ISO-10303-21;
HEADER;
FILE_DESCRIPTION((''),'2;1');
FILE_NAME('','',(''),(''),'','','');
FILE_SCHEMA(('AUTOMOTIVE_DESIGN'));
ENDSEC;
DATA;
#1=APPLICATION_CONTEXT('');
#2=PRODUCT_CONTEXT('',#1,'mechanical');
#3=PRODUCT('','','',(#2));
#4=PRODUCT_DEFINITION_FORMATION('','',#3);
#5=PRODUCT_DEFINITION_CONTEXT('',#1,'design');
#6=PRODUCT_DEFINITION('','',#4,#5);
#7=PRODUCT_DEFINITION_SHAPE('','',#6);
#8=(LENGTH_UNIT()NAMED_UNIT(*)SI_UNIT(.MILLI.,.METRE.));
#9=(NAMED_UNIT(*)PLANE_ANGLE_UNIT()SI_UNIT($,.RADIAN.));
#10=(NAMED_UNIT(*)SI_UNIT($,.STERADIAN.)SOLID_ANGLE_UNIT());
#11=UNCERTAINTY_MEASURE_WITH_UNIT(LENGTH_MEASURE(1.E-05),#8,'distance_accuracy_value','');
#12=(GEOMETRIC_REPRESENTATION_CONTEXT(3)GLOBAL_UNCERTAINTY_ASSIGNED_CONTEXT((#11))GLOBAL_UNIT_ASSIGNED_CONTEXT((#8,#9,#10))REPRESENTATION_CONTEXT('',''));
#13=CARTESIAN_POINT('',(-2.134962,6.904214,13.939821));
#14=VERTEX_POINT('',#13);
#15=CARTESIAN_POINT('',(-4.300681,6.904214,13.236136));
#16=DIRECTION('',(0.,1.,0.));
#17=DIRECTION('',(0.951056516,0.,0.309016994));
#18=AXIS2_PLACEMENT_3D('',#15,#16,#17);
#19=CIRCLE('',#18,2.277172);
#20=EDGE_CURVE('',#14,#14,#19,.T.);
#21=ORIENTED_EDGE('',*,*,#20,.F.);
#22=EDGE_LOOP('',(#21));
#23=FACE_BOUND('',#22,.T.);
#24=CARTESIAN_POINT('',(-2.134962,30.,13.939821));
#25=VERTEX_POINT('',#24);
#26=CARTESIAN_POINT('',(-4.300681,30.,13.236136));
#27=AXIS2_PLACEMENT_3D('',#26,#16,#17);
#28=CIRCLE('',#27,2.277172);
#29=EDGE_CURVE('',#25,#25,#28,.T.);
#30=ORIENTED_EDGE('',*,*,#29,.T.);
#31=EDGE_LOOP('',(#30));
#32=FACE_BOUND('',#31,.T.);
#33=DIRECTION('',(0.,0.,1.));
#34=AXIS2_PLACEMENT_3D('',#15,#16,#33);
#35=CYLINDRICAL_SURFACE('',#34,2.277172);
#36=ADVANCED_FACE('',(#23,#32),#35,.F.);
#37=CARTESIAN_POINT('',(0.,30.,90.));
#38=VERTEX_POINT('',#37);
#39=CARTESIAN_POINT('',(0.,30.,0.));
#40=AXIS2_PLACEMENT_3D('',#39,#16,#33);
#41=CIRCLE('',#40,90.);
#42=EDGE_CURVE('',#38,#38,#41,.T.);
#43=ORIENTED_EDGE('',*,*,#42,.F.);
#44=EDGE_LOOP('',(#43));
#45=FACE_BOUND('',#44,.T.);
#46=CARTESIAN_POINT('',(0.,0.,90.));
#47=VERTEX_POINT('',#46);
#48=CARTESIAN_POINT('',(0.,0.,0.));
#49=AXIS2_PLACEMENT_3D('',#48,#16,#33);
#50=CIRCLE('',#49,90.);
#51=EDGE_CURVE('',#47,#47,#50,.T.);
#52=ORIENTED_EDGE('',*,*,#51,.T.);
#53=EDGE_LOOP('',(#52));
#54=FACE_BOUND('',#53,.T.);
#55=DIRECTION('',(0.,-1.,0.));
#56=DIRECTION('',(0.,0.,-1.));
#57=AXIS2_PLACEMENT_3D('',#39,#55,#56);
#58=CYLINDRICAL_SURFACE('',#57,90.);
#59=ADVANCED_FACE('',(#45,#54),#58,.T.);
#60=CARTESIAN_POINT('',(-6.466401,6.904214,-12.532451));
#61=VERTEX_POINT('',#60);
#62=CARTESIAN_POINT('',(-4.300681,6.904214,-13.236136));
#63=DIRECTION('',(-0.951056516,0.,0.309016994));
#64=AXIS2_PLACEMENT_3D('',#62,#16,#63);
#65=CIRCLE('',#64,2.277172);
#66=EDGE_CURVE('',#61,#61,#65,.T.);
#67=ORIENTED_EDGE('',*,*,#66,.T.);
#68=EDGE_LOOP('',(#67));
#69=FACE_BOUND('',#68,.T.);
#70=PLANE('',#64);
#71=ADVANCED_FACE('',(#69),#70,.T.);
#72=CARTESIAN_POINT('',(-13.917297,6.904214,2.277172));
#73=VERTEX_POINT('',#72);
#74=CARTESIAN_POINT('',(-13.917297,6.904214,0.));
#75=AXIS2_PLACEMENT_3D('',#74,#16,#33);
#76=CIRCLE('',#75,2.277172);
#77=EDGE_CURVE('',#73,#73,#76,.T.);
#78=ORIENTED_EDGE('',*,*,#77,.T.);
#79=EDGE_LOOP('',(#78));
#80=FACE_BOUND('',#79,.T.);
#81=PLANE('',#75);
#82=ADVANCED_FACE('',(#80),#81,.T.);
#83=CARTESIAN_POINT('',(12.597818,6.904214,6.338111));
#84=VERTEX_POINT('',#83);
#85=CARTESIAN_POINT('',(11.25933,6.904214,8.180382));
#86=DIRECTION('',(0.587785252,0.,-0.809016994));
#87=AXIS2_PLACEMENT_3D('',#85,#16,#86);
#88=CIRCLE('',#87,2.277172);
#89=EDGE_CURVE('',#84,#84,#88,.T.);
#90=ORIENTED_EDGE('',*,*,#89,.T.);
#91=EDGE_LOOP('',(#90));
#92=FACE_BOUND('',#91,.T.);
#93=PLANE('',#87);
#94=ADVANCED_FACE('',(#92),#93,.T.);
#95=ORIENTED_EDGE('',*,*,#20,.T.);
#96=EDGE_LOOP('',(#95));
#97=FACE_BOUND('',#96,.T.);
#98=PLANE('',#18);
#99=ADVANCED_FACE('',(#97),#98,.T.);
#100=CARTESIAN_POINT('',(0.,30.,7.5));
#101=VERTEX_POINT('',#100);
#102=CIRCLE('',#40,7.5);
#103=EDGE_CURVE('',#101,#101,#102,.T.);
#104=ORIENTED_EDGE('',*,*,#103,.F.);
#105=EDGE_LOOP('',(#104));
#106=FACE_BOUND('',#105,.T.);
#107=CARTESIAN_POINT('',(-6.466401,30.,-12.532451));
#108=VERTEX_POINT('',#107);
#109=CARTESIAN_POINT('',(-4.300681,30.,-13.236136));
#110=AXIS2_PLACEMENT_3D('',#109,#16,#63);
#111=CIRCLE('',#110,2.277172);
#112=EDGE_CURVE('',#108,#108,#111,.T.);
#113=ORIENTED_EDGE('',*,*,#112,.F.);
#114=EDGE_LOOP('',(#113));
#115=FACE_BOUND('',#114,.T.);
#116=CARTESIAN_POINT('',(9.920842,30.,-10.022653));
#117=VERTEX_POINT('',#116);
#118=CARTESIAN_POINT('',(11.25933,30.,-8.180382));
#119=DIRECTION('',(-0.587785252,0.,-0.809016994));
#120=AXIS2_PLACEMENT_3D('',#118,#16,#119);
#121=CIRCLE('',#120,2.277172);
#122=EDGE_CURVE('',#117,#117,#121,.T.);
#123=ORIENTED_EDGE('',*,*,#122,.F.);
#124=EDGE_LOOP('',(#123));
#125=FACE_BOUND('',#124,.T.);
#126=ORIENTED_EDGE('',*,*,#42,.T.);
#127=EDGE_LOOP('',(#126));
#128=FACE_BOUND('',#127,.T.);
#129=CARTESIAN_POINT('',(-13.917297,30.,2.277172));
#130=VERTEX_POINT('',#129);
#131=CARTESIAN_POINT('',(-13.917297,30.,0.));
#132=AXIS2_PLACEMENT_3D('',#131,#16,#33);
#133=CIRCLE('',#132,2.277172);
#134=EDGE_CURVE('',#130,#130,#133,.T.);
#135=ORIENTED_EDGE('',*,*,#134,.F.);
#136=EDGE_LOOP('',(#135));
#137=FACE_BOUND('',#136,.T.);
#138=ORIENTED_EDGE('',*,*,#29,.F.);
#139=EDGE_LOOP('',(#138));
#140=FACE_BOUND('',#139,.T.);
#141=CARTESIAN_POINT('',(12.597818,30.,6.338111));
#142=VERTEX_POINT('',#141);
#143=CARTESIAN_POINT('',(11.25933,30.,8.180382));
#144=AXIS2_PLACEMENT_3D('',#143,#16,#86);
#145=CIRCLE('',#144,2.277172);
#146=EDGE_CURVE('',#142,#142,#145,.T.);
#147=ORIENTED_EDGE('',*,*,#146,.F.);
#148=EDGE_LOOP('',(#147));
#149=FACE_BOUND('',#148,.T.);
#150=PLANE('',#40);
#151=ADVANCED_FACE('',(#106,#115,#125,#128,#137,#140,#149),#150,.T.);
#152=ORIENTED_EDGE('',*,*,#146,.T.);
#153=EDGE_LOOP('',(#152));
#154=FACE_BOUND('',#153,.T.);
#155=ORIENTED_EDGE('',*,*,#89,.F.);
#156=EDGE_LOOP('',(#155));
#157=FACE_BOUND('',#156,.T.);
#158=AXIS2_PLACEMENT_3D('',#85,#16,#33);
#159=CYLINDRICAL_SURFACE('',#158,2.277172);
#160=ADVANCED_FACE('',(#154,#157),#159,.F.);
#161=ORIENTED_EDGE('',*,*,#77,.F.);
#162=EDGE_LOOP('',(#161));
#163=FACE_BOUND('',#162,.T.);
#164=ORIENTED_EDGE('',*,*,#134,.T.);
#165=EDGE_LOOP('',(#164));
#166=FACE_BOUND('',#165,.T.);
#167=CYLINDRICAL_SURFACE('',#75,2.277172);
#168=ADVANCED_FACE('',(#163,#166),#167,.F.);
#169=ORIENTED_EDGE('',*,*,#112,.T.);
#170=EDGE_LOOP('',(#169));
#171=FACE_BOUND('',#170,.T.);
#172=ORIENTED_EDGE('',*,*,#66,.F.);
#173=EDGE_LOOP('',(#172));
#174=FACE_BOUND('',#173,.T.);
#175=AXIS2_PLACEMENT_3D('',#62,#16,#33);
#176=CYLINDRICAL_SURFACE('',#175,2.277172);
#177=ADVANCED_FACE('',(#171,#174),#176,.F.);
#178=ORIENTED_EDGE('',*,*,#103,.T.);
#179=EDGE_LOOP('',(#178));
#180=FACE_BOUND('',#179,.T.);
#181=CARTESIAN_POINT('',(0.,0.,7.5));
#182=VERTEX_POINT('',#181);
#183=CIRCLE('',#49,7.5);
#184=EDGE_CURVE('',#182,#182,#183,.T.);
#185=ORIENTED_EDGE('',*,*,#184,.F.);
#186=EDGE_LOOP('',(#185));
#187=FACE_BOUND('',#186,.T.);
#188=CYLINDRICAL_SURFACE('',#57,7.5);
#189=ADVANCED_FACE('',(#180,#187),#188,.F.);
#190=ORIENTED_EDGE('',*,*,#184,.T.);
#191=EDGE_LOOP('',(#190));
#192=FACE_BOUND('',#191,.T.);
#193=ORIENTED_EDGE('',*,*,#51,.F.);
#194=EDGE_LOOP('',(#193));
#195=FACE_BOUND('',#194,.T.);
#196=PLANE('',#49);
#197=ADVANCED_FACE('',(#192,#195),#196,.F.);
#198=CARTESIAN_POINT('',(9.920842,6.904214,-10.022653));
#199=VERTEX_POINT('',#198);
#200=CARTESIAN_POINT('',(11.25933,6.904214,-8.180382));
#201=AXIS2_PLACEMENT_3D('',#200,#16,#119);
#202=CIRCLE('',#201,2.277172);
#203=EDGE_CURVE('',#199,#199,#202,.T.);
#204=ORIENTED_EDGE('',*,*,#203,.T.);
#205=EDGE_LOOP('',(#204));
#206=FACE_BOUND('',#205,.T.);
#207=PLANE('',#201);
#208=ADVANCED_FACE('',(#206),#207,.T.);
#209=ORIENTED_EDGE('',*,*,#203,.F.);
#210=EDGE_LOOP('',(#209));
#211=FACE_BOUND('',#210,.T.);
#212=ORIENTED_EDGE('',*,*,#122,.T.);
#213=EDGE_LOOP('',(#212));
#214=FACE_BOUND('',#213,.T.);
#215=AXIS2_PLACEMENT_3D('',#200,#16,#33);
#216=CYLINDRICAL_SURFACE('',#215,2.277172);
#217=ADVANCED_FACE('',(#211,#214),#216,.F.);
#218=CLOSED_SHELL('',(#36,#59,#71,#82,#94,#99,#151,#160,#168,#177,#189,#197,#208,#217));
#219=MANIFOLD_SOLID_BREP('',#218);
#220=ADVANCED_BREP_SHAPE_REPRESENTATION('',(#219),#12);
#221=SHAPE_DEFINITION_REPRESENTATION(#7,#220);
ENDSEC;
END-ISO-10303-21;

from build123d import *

# Parameters (mm, degrees)
SKETCH1_R           = 90
BOSS_EXTRUDE1_DEPTH = 30
SKETCH2_R           = 7.5
CUT_EXTRUDE1_DEPTH  = 131.766968306
SKETCH3_R           = 2.277172364
CUT_EXTRUDE2_DEPTH  = 23.095785854
CIRPATTERN1_COUNT   = 5


with BuildPart() as part:
    # Sketch1 → Boss-Extrude1 (new body)
    with BuildSketch(Plane(origin=(0, 0, 0), x_dir=(1, 0, 0), z_dir=(0, 1, 0))):
        Circle(SKETCH1_R)
    extrude(amount=BOSS_EXTRUDE1_DEPTH)

    # Sketch2 → Cut-Extrude1 (cut, through all)
    with BuildSketch(Plane(origin=(0, 0, 0), x_dir=(1, 0, 0), z_dir=(0, 1, 0))):
        Circle(SKETCH2_R)
    extrude(amount=CUT_EXTRUDE1_DEPTH, mode=Mode.SUBTRACT)

    # Sketch3 → Cut-Extrude2 (cut)
    with BuildSketch(Plane(origin=(0, 30, 0), x_dir=(1, 0, 0), z_dir=(0, 1, 0))):
        with Locations((-13.917297309, 0)):
            Circle(SKETCH3_R)
    cut_extrude2 = extrude(amount=-CUT_EXTRUDE2_DEPTH, mode=Mode.SUBTRACT)

    # CirPattern1: Cut-Extrude2 ×5 about axis
    cirpattern1_axis = Axis((0, 0, 0), (0, 1, 0))
    for i in range(1, CIRPATTERN1_COUNT):
        add(cut_extrude2.rotate(cirpattern1_axis, i * 360 / CIRPATTERN1_COUNT), mode=Mode.SUBTRACT)


solid = part.part
